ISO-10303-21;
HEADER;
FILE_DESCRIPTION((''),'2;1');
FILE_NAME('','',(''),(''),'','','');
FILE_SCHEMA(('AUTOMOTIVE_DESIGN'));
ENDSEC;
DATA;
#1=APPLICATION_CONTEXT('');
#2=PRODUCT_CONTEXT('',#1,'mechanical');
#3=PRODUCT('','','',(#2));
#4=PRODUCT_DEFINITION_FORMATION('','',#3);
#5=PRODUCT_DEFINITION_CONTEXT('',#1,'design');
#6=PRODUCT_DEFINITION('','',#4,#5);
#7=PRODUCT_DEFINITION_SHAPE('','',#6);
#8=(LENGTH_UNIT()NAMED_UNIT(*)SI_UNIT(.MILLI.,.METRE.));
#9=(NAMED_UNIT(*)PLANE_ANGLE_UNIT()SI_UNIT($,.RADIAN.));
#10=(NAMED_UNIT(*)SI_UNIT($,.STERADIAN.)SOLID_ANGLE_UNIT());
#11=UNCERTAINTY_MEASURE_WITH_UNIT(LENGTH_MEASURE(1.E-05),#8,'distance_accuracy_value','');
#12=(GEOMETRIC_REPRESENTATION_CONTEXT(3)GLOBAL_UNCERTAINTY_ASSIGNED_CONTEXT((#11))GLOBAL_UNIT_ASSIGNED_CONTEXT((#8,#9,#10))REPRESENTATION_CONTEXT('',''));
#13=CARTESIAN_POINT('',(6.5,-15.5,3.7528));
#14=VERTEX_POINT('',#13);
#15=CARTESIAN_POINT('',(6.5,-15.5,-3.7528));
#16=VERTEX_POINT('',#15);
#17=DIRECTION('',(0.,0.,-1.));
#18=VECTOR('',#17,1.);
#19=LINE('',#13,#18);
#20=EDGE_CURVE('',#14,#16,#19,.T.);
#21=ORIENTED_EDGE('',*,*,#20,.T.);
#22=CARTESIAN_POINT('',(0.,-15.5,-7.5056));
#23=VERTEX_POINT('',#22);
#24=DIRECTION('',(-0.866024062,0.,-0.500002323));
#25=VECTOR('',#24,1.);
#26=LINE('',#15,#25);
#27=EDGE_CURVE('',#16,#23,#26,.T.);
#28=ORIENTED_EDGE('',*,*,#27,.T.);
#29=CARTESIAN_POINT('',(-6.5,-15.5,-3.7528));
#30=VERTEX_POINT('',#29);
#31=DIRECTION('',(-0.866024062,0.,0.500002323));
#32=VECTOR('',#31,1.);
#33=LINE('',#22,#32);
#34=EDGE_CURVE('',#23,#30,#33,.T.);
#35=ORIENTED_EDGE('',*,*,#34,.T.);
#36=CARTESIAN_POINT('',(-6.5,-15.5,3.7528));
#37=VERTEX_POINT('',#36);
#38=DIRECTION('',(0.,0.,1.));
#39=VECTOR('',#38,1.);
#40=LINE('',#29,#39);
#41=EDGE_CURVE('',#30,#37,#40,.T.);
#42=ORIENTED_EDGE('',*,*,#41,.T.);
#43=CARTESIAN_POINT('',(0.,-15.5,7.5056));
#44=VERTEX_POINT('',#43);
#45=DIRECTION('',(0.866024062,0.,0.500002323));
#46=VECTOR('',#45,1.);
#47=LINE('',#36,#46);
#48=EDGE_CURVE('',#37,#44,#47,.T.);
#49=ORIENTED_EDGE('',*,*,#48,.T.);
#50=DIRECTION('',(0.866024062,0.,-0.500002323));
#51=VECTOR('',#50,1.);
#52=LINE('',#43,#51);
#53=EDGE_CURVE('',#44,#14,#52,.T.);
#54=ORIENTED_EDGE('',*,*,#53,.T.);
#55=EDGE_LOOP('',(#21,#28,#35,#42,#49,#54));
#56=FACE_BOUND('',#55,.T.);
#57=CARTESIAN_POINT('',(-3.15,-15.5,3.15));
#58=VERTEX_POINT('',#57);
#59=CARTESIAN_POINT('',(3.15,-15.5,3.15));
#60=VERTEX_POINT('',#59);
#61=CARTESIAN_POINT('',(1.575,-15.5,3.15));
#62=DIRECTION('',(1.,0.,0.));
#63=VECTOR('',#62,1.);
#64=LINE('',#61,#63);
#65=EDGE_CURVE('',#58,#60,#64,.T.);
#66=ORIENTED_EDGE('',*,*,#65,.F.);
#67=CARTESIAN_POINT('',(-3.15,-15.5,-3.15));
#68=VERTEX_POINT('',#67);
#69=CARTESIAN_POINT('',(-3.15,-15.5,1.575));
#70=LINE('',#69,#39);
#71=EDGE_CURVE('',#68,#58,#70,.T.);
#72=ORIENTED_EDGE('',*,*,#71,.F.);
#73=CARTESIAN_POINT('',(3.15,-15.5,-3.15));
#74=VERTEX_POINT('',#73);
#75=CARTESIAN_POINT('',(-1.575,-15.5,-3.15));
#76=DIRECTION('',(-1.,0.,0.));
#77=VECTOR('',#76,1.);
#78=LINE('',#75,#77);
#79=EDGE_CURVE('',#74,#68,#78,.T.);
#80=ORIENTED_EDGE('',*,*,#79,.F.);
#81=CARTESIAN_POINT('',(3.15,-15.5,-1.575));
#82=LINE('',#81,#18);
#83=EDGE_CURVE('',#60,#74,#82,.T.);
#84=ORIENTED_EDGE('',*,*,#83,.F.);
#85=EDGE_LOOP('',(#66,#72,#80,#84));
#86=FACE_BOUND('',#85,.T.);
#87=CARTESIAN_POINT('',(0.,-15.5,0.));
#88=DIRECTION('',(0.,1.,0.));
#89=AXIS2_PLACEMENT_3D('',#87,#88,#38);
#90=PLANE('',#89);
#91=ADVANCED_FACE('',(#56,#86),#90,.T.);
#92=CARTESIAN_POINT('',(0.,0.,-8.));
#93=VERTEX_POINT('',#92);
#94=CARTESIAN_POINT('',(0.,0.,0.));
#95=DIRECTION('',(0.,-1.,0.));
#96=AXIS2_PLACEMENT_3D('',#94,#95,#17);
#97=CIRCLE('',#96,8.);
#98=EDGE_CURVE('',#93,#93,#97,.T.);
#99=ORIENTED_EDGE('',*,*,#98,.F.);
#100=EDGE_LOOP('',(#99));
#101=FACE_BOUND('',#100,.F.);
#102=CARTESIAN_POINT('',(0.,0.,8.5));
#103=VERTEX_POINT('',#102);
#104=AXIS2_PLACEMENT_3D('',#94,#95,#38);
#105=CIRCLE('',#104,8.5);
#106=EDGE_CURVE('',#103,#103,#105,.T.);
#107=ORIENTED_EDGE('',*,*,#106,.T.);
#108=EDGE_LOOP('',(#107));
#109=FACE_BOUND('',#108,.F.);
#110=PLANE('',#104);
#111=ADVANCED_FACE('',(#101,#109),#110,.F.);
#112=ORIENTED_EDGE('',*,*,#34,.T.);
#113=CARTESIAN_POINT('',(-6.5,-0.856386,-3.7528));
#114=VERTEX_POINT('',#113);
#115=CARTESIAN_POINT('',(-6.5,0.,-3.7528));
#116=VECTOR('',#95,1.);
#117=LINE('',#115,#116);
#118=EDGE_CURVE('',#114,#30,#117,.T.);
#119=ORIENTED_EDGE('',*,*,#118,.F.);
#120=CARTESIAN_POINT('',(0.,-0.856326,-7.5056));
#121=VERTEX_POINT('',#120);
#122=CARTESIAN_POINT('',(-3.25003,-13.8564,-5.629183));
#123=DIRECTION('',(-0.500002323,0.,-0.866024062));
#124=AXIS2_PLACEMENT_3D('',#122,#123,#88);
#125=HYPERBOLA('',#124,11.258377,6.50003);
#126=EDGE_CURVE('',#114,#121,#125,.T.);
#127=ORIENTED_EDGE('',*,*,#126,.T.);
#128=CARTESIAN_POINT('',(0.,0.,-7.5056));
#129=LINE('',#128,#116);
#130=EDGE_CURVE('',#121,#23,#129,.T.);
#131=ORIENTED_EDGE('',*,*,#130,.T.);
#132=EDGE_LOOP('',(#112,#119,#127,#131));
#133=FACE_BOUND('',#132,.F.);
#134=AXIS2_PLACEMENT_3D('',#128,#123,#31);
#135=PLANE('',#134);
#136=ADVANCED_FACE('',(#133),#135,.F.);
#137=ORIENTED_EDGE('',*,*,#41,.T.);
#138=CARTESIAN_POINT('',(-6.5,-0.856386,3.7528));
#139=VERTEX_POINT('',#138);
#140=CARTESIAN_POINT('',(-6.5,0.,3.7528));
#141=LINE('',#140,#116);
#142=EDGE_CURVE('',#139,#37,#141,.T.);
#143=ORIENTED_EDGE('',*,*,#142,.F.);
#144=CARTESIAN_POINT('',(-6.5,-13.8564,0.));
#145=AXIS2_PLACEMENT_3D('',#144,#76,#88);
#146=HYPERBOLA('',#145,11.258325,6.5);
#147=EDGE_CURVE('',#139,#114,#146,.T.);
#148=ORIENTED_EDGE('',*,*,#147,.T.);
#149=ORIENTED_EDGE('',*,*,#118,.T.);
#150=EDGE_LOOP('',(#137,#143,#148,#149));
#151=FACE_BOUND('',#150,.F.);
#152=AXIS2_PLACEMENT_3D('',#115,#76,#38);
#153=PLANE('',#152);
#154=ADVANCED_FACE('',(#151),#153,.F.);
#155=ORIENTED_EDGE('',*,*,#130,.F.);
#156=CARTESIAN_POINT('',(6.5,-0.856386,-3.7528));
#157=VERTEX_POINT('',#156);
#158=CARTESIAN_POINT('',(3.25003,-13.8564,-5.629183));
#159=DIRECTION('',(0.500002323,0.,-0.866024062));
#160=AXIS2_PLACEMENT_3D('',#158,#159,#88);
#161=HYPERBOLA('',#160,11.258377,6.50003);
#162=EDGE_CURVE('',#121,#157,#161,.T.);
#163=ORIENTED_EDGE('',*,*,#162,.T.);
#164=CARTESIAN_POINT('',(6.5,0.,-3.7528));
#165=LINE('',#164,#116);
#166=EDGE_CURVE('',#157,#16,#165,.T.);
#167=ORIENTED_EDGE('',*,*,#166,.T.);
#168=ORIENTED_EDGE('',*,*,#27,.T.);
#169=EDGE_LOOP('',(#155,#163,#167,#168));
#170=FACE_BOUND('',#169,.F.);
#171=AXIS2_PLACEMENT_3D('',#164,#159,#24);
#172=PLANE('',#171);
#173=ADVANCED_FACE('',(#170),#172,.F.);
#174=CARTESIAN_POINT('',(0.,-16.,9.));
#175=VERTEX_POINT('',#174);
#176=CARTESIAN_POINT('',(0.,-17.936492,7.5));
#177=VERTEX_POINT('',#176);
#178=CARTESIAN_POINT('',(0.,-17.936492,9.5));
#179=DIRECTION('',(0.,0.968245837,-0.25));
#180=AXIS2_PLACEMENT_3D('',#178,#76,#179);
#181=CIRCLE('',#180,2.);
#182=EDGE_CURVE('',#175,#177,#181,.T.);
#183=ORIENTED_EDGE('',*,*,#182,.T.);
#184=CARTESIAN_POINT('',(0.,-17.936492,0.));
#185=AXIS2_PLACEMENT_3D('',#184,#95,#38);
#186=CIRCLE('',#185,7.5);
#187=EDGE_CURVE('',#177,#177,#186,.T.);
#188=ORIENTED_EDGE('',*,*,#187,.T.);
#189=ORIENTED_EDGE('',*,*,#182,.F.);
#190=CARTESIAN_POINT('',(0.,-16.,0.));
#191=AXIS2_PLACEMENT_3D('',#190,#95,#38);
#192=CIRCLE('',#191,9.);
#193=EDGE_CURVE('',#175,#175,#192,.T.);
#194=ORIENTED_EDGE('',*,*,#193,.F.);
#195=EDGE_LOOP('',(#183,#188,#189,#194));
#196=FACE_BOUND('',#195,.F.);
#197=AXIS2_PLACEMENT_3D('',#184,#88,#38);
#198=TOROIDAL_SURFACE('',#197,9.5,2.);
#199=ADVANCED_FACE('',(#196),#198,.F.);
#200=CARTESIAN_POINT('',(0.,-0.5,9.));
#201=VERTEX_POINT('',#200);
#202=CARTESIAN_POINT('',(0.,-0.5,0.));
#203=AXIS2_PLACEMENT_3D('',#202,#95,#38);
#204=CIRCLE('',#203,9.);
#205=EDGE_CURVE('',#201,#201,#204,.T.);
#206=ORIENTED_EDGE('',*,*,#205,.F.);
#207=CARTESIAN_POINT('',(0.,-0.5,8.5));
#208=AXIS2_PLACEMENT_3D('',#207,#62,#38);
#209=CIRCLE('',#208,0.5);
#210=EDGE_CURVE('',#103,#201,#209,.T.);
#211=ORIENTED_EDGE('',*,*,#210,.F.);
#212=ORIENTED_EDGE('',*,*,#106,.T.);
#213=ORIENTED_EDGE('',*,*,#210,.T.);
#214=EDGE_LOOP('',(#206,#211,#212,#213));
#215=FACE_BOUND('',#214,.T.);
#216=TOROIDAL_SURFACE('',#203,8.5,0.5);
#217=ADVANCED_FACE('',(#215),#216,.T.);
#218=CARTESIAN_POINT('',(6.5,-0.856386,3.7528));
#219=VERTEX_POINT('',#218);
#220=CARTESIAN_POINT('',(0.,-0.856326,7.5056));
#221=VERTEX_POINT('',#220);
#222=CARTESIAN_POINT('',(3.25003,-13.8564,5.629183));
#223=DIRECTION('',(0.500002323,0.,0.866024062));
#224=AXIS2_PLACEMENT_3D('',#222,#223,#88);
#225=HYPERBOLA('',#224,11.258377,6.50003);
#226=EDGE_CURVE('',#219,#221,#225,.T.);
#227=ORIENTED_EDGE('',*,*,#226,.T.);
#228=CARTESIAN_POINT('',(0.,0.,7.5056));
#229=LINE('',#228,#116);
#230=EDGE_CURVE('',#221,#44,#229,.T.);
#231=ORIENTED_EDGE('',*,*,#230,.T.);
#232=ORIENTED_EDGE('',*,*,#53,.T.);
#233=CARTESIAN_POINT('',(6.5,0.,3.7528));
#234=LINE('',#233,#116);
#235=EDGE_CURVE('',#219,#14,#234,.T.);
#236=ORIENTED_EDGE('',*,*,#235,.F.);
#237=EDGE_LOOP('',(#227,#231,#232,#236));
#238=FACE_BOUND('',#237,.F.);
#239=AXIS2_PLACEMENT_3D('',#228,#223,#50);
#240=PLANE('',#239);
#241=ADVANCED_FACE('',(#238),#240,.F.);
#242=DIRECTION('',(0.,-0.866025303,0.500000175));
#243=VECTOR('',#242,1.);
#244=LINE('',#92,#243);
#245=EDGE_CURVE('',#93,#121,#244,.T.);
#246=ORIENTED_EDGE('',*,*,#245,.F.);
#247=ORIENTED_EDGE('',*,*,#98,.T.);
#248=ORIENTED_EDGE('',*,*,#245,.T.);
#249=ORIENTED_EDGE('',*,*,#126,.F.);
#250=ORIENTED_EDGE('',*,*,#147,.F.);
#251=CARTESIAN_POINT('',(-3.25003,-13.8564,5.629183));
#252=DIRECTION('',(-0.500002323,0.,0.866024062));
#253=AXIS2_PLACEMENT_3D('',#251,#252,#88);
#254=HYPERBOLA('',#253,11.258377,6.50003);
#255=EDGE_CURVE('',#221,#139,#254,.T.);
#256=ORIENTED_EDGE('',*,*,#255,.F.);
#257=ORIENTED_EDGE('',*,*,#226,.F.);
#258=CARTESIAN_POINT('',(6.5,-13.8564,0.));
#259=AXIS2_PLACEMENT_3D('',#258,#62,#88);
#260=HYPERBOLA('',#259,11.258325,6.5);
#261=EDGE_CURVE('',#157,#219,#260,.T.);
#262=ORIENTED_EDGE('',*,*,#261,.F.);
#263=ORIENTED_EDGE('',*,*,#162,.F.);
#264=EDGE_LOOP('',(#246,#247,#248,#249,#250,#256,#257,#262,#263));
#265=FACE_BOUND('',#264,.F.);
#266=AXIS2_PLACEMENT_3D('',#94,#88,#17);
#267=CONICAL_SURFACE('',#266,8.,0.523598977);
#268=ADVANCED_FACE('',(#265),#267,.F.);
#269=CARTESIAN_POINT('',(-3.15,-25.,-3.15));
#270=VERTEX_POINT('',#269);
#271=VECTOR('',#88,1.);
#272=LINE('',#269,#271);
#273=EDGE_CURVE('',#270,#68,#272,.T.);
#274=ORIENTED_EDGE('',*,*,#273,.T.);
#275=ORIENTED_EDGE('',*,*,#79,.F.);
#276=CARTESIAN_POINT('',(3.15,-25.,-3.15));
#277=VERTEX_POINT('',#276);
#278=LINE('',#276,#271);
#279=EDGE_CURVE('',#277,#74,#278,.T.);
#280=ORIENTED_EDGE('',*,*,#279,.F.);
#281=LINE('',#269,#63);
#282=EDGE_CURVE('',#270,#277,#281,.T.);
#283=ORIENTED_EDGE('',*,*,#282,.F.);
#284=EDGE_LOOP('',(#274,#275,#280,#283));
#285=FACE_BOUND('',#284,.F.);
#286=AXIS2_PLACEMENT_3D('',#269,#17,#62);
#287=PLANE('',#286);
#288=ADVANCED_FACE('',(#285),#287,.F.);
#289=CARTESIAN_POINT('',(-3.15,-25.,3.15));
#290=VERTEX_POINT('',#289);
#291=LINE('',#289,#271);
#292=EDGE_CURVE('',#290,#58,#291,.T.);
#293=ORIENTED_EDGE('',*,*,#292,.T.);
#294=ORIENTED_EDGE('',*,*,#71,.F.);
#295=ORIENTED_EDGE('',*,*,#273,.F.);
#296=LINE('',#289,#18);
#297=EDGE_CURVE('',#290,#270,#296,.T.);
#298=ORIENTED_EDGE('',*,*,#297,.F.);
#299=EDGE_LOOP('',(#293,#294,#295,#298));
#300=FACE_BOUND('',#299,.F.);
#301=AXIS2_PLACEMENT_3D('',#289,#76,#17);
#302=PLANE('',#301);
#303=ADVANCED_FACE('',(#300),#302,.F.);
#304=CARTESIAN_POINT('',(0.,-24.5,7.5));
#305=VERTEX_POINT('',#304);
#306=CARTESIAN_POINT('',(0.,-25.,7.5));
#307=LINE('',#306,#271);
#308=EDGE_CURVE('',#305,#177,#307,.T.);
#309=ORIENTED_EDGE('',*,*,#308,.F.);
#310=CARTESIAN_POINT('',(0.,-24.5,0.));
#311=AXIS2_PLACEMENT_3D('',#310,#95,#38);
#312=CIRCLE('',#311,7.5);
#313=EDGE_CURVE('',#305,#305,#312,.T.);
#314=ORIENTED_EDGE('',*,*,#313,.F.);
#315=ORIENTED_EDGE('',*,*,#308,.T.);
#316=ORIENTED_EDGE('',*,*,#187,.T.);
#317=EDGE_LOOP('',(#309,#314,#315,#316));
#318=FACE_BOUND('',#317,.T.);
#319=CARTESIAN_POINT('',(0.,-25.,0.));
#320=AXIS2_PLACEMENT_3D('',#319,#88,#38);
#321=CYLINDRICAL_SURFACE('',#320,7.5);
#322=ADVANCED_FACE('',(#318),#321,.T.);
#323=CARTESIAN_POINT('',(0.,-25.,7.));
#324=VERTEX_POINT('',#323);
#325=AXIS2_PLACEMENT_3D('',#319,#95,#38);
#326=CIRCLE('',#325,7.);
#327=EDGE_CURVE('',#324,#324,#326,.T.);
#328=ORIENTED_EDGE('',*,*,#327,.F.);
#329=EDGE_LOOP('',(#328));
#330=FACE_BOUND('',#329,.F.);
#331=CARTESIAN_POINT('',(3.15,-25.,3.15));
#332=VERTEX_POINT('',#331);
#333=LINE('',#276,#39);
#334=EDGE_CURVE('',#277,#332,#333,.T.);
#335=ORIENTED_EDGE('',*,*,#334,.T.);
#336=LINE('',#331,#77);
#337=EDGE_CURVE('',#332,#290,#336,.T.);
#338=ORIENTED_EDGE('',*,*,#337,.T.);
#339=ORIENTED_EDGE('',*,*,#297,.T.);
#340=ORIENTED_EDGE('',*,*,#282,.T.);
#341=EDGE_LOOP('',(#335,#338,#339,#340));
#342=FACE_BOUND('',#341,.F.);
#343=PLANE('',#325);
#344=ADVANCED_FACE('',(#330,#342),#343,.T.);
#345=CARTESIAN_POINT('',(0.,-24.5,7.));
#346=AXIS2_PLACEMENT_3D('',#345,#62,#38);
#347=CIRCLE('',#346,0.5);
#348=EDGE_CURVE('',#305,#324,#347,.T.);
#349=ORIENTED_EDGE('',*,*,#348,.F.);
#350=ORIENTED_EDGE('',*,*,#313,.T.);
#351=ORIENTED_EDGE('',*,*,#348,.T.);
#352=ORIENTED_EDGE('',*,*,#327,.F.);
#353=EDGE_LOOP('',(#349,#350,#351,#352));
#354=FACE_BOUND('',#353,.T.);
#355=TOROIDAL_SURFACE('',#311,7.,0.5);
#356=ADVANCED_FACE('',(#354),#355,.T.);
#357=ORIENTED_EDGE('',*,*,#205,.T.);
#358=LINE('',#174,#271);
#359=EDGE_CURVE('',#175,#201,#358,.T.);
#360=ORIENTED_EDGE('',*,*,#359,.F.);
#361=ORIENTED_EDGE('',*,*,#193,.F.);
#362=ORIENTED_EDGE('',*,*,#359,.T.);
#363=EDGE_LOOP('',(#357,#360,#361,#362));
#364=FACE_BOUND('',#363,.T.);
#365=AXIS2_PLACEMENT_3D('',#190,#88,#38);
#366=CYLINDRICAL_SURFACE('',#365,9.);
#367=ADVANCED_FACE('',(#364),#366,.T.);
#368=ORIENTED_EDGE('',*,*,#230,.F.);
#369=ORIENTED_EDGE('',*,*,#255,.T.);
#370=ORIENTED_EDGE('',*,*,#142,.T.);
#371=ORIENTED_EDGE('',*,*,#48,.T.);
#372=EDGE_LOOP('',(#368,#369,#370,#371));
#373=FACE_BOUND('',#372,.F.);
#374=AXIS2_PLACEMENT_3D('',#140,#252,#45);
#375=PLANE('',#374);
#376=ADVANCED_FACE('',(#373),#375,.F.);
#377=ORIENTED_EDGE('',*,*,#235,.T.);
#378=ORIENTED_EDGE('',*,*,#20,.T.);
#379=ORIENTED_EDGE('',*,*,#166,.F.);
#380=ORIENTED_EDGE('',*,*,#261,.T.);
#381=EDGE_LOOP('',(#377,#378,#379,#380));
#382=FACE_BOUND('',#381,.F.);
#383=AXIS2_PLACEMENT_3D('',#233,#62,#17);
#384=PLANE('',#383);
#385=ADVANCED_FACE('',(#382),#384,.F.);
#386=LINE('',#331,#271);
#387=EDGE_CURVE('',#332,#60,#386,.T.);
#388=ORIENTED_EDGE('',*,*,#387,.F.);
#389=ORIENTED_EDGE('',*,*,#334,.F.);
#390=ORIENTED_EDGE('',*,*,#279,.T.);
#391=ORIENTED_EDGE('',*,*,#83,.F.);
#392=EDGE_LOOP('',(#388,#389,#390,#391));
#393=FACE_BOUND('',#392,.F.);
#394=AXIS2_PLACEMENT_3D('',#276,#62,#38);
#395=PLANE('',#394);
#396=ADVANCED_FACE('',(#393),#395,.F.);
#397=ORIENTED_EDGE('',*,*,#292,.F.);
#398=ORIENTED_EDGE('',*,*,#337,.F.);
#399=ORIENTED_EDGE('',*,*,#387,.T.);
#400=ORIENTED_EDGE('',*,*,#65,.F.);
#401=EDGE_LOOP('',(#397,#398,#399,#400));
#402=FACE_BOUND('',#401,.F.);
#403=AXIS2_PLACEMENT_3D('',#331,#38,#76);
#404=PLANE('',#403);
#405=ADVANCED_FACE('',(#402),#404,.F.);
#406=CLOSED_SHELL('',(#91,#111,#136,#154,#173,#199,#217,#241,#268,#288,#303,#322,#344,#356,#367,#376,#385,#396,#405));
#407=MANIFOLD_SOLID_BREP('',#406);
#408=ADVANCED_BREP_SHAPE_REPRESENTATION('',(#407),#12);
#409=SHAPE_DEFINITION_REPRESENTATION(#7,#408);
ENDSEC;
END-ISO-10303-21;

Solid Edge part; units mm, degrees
sketch "Sketch1" plane through (0, 0, 0) normal (1, 0, 0) x (0, 1, 0)
  line L0 (-25, 7.5) -> (-16, 7.5)
  line L1 (-16, 7.5) -> (-16, 9)
  line L2 (-16, 9) -> (0, 9)
  line L3 (0, 9) -> (0, 0)
  line L4 (-25, 0) -> (-25, 7.5)
  dimension "D1" = 25
  dimension "D2" = 16
revolve "RevolvedProtrusion1" add sketch "Sketch1" angle 360 about axis through (0, 0, 0) along (0, -1, 0)
sketch "Sketch2" plane through (0, 0, 0) normal (0, 1, 0) x (-1, 0, 0)
  line L0 (0, -7.5056) -> (6.5, -3.7528)
  line L1 (6.5, -3.7528) -> (6.5, 3.7528)
  line L2 (6.5, 3.7528) -> (0, 7.5056)
  line L3 (0, 7.5056) -> (-6.5, 3.7528)
  line L4 (-6.5, 3.7528) -> (-6.5, -3.7528)
  line L5 (-6.5, -3.7528) -> (0, -7.5056)
  dimension "D1" = 13
extrude "Cutout1" cut sketch "Sketch2" against normal blind 15.5
sketch "Sketch3" plane through (0, -25, 0) normal (0, -1, 0) x (1, 0, 0)
  line L0 (3.15, 3.15) -> (-3.15, 3.15)
  line L1 (-3.15, 3.15) -> (-3.15, -3.15)
  line L2 (-3.15, -3.15) -> (3.15, -3.15)
  line L3 (3.15, -3.15) -> (3.15, 3.15)
  dimension "D1" = 6.3
extrude "Extrusionsausschnitt_2" cut sketch "Sketch3" against normal blind 51.1789
fillet "Verrundung_1" radius 0.5 2 edges at (0, -25, 7.5) (0, 0, 9)
fillet "Verrundung_2" radius 2 1 edges at (0, -16, 7.5)
sketch "Sketch4" plane through (0, 0, 0) normal (1, 0, 0) x (0, 1, 0)
  line L0 (0, -8) -> (-13.8564, 0)
  line L1 (0, 0) -> (0, -8)
  dimension "D1" = 8
revolve "RevolvedCutout1" cut sketch "Sketch4" angle 360 about axis through (0, 0, 0) along (0, -1, 0)
